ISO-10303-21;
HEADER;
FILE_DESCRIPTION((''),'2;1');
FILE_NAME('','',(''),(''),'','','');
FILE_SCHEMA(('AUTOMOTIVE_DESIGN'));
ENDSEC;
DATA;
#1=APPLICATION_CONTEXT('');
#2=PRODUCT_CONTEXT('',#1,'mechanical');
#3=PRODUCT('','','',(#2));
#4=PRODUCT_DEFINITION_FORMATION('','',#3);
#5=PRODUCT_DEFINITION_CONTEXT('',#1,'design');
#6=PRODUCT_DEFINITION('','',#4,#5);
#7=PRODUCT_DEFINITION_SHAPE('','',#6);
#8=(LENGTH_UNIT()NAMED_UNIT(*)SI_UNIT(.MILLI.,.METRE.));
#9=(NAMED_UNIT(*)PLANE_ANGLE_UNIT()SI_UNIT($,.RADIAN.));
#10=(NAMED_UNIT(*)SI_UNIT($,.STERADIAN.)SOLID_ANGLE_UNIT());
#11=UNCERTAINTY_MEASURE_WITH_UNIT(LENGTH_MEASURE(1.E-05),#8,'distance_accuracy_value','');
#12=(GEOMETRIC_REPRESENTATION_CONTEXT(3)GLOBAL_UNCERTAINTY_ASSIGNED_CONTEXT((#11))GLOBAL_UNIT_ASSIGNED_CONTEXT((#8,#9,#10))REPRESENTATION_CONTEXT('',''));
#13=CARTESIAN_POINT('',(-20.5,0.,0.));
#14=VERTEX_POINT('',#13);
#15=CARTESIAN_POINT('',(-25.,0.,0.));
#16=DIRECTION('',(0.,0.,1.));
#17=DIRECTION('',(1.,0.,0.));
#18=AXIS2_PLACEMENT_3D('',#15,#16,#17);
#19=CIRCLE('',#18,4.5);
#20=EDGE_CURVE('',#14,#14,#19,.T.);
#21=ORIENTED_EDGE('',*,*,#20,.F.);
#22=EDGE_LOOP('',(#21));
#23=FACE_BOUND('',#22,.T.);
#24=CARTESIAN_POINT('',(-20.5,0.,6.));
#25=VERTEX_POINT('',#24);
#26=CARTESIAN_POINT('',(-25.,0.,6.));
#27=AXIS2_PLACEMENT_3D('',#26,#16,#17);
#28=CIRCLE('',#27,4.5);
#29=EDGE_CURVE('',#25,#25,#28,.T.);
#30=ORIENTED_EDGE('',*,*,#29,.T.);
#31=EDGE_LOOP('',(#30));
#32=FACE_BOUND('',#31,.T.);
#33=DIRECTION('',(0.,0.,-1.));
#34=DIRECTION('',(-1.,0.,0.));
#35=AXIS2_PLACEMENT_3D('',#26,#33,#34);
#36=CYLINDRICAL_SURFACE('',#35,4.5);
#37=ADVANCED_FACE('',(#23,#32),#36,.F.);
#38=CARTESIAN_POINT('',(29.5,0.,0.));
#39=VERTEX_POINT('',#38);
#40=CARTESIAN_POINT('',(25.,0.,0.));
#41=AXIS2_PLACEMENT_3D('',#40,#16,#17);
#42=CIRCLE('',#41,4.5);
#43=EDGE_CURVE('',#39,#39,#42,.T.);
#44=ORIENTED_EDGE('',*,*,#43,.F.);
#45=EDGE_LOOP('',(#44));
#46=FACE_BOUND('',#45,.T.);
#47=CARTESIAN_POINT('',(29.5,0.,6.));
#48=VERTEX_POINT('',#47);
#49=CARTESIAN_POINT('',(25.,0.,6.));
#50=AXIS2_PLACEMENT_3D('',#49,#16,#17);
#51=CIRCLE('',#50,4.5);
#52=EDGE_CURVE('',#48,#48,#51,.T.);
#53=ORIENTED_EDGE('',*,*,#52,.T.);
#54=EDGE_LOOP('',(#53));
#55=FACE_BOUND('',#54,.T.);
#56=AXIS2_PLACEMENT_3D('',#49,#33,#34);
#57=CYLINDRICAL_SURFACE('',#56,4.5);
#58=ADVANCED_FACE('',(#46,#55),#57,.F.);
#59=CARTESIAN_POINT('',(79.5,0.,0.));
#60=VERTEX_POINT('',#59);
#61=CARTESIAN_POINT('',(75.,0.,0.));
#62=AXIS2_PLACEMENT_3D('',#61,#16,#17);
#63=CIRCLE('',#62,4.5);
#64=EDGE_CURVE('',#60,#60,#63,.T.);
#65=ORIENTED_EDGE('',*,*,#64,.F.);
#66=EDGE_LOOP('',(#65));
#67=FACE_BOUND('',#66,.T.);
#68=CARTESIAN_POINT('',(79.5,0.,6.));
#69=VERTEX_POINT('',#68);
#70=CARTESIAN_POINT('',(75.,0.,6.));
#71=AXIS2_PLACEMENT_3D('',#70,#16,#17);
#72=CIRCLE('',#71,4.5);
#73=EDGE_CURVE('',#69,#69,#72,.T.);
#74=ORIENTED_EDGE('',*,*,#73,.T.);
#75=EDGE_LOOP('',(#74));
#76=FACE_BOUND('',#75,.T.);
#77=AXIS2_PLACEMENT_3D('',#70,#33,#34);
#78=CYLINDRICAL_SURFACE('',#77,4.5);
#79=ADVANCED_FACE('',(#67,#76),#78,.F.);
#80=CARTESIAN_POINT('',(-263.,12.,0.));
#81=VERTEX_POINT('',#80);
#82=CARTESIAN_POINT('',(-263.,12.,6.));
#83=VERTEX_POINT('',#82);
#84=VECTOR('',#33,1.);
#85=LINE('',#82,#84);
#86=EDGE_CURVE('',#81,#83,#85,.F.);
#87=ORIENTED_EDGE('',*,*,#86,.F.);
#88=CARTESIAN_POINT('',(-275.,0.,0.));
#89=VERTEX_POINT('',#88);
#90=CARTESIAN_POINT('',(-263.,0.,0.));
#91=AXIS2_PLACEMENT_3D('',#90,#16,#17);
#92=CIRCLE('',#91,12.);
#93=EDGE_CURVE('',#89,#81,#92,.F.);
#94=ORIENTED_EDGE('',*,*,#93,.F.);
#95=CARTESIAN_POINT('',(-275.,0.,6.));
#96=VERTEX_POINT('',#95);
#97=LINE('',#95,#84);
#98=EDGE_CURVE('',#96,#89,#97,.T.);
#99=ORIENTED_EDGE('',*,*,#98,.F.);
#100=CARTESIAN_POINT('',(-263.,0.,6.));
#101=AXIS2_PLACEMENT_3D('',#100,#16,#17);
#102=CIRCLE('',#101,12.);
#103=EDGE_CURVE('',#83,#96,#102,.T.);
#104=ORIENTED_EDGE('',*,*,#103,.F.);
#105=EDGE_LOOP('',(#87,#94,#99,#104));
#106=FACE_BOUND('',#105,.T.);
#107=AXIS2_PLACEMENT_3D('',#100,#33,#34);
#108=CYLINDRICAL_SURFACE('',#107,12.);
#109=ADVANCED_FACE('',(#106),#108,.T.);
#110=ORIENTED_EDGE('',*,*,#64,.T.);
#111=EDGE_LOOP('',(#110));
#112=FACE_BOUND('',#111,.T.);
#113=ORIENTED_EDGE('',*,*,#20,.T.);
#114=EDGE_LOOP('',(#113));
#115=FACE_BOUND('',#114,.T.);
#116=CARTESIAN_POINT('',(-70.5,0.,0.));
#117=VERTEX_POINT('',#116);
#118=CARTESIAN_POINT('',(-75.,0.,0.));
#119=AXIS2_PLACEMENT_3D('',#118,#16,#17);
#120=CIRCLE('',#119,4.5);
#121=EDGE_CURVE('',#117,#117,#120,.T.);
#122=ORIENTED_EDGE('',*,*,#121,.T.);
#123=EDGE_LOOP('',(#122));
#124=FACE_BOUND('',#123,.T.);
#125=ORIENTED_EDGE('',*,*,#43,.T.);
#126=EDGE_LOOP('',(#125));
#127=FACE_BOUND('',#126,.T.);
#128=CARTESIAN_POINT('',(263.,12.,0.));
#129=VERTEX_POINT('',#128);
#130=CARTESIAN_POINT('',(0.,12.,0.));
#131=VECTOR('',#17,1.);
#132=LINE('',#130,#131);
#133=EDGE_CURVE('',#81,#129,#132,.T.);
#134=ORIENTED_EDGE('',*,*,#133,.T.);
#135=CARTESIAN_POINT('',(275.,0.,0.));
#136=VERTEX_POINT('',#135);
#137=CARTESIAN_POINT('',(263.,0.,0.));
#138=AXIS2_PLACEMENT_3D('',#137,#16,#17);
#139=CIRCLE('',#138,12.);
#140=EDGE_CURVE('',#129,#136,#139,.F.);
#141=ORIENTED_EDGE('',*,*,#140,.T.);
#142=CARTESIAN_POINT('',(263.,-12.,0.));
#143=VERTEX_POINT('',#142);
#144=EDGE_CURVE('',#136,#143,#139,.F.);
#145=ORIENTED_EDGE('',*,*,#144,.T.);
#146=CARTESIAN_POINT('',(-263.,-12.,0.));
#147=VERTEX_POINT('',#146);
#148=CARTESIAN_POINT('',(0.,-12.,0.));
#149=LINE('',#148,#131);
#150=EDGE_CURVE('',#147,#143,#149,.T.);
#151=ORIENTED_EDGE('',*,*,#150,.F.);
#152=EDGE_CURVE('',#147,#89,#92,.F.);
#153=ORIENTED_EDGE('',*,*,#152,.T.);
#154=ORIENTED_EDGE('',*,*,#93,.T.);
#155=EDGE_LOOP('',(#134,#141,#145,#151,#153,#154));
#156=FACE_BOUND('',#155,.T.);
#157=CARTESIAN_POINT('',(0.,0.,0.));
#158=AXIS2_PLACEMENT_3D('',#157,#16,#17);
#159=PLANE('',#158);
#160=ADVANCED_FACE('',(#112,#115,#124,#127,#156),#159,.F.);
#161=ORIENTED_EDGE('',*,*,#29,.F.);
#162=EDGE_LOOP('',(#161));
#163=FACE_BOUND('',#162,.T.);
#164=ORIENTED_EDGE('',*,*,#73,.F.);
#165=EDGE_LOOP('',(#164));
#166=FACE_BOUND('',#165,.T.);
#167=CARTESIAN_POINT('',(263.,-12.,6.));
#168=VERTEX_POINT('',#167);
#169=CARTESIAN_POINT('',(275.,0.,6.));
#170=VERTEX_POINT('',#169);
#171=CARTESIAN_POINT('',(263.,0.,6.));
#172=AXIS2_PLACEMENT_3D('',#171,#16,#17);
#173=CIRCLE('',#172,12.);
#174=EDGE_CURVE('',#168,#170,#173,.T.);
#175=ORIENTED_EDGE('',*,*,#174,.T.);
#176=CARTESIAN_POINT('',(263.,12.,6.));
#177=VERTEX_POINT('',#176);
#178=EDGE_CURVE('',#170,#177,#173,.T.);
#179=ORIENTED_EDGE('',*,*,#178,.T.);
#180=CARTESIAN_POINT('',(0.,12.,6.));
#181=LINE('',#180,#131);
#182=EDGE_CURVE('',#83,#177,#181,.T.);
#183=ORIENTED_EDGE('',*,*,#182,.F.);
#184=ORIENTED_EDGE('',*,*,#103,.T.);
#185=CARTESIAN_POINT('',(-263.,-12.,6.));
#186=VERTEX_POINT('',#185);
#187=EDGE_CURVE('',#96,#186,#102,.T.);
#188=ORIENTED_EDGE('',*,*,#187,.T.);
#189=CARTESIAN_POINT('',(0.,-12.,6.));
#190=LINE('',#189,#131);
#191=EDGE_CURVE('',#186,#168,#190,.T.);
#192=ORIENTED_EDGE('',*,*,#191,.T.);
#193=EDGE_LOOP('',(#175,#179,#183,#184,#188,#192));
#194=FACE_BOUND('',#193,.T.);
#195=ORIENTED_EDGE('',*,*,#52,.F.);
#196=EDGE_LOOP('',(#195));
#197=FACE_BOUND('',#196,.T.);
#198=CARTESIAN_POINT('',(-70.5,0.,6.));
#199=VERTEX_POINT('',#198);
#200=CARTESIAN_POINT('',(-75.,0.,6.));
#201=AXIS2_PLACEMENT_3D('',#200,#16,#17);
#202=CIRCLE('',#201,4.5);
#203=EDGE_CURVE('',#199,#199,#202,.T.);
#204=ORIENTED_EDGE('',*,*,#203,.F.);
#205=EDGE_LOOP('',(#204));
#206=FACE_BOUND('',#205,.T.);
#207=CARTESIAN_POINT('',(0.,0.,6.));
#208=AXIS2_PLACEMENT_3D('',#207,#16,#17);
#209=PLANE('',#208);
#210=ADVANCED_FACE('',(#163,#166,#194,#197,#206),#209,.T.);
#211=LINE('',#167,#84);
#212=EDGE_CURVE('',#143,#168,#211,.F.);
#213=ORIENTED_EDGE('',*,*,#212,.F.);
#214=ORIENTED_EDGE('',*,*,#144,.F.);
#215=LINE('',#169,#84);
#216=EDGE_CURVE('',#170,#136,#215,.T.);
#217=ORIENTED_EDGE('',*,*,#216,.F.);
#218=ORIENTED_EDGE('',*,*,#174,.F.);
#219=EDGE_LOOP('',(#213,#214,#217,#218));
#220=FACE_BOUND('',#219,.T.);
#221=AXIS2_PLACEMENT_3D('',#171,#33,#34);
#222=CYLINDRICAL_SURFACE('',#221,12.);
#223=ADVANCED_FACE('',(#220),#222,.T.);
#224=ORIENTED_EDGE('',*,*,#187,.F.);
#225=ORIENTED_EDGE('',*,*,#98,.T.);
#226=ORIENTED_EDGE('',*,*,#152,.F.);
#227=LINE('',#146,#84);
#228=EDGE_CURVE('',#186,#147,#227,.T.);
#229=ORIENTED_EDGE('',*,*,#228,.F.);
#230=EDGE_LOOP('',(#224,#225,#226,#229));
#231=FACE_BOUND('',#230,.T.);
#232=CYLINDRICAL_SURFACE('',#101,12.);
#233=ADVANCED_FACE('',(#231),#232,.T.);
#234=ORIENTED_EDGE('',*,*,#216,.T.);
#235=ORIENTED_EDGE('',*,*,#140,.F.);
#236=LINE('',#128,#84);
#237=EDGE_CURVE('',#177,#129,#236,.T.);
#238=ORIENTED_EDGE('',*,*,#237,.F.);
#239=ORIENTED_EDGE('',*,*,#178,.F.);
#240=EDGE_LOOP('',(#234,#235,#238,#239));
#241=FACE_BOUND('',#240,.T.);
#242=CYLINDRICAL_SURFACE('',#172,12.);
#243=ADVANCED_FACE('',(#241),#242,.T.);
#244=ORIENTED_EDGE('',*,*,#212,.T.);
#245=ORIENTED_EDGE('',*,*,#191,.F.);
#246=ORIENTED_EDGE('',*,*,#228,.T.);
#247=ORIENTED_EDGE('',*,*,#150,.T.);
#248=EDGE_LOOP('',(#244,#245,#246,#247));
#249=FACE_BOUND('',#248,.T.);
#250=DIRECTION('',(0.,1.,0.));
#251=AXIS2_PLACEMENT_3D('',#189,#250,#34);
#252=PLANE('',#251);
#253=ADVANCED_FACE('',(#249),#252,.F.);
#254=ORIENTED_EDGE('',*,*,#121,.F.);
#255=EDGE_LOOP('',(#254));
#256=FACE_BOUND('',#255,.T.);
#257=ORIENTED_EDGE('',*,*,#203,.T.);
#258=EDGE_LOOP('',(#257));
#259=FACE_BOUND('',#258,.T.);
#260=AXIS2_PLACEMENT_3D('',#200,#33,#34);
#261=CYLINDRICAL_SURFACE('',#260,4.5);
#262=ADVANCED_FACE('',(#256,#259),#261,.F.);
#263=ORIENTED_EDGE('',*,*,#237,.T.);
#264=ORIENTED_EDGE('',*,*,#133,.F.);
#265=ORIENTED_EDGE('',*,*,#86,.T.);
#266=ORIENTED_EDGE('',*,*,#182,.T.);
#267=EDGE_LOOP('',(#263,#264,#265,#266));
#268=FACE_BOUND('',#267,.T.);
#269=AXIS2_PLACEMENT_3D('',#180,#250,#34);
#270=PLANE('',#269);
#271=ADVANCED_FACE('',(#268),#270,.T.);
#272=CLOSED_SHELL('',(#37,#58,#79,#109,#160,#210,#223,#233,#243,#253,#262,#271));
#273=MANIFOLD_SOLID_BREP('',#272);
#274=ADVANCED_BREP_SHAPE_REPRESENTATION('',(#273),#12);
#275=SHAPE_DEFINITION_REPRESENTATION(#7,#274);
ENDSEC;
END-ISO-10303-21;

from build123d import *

# Parameters (mm, degrees)
SKETCH1_W           = 550
SKETCH1_H           = 24
SKETCH1_R           = 4.5
BOSS_EXTRUDE1_DEPTH = 6
FILLET2_R           = 12


with BuildPart() as part:
    # Sketch1 → Boss-Extrude1 (new body)
    with BuildSketch(Plane.XY):
        Rectangle(SKETCH1_W, SKETCH1_H)
        with Locations((75, 0)):
            Circle(SKETCH1_R, mode=Mode.SUBTRACT)
        with Locations((25, 0)):
            Circle(SKETCH1_R, mode=Mode.SUBTRACT)
        with Locations((-25, 0)):
            Circle(SKETCH1_R, mode=Mode.SUBTRACT)
        with Locations((-75, 0)):
            Circle(SKETCH1_R, mode=Mode.SUBTRACT)
    extrude(amount=BOSS_EXTRUDE1_DEPTH)

    # Fillet2
    fillet2_edges = [part.edges().sort_by_distance(p)[0] for p in [
        (-275, -12, 3),
        (-275, 12, 3),
        (275, 12, 3),
        (275, -12, 3),
    ]]
    fillet(fillet2_edges, radius=FILLET2_R - 0.0001)  # a hair under: the kernel refuses the full size


solid = part.part
